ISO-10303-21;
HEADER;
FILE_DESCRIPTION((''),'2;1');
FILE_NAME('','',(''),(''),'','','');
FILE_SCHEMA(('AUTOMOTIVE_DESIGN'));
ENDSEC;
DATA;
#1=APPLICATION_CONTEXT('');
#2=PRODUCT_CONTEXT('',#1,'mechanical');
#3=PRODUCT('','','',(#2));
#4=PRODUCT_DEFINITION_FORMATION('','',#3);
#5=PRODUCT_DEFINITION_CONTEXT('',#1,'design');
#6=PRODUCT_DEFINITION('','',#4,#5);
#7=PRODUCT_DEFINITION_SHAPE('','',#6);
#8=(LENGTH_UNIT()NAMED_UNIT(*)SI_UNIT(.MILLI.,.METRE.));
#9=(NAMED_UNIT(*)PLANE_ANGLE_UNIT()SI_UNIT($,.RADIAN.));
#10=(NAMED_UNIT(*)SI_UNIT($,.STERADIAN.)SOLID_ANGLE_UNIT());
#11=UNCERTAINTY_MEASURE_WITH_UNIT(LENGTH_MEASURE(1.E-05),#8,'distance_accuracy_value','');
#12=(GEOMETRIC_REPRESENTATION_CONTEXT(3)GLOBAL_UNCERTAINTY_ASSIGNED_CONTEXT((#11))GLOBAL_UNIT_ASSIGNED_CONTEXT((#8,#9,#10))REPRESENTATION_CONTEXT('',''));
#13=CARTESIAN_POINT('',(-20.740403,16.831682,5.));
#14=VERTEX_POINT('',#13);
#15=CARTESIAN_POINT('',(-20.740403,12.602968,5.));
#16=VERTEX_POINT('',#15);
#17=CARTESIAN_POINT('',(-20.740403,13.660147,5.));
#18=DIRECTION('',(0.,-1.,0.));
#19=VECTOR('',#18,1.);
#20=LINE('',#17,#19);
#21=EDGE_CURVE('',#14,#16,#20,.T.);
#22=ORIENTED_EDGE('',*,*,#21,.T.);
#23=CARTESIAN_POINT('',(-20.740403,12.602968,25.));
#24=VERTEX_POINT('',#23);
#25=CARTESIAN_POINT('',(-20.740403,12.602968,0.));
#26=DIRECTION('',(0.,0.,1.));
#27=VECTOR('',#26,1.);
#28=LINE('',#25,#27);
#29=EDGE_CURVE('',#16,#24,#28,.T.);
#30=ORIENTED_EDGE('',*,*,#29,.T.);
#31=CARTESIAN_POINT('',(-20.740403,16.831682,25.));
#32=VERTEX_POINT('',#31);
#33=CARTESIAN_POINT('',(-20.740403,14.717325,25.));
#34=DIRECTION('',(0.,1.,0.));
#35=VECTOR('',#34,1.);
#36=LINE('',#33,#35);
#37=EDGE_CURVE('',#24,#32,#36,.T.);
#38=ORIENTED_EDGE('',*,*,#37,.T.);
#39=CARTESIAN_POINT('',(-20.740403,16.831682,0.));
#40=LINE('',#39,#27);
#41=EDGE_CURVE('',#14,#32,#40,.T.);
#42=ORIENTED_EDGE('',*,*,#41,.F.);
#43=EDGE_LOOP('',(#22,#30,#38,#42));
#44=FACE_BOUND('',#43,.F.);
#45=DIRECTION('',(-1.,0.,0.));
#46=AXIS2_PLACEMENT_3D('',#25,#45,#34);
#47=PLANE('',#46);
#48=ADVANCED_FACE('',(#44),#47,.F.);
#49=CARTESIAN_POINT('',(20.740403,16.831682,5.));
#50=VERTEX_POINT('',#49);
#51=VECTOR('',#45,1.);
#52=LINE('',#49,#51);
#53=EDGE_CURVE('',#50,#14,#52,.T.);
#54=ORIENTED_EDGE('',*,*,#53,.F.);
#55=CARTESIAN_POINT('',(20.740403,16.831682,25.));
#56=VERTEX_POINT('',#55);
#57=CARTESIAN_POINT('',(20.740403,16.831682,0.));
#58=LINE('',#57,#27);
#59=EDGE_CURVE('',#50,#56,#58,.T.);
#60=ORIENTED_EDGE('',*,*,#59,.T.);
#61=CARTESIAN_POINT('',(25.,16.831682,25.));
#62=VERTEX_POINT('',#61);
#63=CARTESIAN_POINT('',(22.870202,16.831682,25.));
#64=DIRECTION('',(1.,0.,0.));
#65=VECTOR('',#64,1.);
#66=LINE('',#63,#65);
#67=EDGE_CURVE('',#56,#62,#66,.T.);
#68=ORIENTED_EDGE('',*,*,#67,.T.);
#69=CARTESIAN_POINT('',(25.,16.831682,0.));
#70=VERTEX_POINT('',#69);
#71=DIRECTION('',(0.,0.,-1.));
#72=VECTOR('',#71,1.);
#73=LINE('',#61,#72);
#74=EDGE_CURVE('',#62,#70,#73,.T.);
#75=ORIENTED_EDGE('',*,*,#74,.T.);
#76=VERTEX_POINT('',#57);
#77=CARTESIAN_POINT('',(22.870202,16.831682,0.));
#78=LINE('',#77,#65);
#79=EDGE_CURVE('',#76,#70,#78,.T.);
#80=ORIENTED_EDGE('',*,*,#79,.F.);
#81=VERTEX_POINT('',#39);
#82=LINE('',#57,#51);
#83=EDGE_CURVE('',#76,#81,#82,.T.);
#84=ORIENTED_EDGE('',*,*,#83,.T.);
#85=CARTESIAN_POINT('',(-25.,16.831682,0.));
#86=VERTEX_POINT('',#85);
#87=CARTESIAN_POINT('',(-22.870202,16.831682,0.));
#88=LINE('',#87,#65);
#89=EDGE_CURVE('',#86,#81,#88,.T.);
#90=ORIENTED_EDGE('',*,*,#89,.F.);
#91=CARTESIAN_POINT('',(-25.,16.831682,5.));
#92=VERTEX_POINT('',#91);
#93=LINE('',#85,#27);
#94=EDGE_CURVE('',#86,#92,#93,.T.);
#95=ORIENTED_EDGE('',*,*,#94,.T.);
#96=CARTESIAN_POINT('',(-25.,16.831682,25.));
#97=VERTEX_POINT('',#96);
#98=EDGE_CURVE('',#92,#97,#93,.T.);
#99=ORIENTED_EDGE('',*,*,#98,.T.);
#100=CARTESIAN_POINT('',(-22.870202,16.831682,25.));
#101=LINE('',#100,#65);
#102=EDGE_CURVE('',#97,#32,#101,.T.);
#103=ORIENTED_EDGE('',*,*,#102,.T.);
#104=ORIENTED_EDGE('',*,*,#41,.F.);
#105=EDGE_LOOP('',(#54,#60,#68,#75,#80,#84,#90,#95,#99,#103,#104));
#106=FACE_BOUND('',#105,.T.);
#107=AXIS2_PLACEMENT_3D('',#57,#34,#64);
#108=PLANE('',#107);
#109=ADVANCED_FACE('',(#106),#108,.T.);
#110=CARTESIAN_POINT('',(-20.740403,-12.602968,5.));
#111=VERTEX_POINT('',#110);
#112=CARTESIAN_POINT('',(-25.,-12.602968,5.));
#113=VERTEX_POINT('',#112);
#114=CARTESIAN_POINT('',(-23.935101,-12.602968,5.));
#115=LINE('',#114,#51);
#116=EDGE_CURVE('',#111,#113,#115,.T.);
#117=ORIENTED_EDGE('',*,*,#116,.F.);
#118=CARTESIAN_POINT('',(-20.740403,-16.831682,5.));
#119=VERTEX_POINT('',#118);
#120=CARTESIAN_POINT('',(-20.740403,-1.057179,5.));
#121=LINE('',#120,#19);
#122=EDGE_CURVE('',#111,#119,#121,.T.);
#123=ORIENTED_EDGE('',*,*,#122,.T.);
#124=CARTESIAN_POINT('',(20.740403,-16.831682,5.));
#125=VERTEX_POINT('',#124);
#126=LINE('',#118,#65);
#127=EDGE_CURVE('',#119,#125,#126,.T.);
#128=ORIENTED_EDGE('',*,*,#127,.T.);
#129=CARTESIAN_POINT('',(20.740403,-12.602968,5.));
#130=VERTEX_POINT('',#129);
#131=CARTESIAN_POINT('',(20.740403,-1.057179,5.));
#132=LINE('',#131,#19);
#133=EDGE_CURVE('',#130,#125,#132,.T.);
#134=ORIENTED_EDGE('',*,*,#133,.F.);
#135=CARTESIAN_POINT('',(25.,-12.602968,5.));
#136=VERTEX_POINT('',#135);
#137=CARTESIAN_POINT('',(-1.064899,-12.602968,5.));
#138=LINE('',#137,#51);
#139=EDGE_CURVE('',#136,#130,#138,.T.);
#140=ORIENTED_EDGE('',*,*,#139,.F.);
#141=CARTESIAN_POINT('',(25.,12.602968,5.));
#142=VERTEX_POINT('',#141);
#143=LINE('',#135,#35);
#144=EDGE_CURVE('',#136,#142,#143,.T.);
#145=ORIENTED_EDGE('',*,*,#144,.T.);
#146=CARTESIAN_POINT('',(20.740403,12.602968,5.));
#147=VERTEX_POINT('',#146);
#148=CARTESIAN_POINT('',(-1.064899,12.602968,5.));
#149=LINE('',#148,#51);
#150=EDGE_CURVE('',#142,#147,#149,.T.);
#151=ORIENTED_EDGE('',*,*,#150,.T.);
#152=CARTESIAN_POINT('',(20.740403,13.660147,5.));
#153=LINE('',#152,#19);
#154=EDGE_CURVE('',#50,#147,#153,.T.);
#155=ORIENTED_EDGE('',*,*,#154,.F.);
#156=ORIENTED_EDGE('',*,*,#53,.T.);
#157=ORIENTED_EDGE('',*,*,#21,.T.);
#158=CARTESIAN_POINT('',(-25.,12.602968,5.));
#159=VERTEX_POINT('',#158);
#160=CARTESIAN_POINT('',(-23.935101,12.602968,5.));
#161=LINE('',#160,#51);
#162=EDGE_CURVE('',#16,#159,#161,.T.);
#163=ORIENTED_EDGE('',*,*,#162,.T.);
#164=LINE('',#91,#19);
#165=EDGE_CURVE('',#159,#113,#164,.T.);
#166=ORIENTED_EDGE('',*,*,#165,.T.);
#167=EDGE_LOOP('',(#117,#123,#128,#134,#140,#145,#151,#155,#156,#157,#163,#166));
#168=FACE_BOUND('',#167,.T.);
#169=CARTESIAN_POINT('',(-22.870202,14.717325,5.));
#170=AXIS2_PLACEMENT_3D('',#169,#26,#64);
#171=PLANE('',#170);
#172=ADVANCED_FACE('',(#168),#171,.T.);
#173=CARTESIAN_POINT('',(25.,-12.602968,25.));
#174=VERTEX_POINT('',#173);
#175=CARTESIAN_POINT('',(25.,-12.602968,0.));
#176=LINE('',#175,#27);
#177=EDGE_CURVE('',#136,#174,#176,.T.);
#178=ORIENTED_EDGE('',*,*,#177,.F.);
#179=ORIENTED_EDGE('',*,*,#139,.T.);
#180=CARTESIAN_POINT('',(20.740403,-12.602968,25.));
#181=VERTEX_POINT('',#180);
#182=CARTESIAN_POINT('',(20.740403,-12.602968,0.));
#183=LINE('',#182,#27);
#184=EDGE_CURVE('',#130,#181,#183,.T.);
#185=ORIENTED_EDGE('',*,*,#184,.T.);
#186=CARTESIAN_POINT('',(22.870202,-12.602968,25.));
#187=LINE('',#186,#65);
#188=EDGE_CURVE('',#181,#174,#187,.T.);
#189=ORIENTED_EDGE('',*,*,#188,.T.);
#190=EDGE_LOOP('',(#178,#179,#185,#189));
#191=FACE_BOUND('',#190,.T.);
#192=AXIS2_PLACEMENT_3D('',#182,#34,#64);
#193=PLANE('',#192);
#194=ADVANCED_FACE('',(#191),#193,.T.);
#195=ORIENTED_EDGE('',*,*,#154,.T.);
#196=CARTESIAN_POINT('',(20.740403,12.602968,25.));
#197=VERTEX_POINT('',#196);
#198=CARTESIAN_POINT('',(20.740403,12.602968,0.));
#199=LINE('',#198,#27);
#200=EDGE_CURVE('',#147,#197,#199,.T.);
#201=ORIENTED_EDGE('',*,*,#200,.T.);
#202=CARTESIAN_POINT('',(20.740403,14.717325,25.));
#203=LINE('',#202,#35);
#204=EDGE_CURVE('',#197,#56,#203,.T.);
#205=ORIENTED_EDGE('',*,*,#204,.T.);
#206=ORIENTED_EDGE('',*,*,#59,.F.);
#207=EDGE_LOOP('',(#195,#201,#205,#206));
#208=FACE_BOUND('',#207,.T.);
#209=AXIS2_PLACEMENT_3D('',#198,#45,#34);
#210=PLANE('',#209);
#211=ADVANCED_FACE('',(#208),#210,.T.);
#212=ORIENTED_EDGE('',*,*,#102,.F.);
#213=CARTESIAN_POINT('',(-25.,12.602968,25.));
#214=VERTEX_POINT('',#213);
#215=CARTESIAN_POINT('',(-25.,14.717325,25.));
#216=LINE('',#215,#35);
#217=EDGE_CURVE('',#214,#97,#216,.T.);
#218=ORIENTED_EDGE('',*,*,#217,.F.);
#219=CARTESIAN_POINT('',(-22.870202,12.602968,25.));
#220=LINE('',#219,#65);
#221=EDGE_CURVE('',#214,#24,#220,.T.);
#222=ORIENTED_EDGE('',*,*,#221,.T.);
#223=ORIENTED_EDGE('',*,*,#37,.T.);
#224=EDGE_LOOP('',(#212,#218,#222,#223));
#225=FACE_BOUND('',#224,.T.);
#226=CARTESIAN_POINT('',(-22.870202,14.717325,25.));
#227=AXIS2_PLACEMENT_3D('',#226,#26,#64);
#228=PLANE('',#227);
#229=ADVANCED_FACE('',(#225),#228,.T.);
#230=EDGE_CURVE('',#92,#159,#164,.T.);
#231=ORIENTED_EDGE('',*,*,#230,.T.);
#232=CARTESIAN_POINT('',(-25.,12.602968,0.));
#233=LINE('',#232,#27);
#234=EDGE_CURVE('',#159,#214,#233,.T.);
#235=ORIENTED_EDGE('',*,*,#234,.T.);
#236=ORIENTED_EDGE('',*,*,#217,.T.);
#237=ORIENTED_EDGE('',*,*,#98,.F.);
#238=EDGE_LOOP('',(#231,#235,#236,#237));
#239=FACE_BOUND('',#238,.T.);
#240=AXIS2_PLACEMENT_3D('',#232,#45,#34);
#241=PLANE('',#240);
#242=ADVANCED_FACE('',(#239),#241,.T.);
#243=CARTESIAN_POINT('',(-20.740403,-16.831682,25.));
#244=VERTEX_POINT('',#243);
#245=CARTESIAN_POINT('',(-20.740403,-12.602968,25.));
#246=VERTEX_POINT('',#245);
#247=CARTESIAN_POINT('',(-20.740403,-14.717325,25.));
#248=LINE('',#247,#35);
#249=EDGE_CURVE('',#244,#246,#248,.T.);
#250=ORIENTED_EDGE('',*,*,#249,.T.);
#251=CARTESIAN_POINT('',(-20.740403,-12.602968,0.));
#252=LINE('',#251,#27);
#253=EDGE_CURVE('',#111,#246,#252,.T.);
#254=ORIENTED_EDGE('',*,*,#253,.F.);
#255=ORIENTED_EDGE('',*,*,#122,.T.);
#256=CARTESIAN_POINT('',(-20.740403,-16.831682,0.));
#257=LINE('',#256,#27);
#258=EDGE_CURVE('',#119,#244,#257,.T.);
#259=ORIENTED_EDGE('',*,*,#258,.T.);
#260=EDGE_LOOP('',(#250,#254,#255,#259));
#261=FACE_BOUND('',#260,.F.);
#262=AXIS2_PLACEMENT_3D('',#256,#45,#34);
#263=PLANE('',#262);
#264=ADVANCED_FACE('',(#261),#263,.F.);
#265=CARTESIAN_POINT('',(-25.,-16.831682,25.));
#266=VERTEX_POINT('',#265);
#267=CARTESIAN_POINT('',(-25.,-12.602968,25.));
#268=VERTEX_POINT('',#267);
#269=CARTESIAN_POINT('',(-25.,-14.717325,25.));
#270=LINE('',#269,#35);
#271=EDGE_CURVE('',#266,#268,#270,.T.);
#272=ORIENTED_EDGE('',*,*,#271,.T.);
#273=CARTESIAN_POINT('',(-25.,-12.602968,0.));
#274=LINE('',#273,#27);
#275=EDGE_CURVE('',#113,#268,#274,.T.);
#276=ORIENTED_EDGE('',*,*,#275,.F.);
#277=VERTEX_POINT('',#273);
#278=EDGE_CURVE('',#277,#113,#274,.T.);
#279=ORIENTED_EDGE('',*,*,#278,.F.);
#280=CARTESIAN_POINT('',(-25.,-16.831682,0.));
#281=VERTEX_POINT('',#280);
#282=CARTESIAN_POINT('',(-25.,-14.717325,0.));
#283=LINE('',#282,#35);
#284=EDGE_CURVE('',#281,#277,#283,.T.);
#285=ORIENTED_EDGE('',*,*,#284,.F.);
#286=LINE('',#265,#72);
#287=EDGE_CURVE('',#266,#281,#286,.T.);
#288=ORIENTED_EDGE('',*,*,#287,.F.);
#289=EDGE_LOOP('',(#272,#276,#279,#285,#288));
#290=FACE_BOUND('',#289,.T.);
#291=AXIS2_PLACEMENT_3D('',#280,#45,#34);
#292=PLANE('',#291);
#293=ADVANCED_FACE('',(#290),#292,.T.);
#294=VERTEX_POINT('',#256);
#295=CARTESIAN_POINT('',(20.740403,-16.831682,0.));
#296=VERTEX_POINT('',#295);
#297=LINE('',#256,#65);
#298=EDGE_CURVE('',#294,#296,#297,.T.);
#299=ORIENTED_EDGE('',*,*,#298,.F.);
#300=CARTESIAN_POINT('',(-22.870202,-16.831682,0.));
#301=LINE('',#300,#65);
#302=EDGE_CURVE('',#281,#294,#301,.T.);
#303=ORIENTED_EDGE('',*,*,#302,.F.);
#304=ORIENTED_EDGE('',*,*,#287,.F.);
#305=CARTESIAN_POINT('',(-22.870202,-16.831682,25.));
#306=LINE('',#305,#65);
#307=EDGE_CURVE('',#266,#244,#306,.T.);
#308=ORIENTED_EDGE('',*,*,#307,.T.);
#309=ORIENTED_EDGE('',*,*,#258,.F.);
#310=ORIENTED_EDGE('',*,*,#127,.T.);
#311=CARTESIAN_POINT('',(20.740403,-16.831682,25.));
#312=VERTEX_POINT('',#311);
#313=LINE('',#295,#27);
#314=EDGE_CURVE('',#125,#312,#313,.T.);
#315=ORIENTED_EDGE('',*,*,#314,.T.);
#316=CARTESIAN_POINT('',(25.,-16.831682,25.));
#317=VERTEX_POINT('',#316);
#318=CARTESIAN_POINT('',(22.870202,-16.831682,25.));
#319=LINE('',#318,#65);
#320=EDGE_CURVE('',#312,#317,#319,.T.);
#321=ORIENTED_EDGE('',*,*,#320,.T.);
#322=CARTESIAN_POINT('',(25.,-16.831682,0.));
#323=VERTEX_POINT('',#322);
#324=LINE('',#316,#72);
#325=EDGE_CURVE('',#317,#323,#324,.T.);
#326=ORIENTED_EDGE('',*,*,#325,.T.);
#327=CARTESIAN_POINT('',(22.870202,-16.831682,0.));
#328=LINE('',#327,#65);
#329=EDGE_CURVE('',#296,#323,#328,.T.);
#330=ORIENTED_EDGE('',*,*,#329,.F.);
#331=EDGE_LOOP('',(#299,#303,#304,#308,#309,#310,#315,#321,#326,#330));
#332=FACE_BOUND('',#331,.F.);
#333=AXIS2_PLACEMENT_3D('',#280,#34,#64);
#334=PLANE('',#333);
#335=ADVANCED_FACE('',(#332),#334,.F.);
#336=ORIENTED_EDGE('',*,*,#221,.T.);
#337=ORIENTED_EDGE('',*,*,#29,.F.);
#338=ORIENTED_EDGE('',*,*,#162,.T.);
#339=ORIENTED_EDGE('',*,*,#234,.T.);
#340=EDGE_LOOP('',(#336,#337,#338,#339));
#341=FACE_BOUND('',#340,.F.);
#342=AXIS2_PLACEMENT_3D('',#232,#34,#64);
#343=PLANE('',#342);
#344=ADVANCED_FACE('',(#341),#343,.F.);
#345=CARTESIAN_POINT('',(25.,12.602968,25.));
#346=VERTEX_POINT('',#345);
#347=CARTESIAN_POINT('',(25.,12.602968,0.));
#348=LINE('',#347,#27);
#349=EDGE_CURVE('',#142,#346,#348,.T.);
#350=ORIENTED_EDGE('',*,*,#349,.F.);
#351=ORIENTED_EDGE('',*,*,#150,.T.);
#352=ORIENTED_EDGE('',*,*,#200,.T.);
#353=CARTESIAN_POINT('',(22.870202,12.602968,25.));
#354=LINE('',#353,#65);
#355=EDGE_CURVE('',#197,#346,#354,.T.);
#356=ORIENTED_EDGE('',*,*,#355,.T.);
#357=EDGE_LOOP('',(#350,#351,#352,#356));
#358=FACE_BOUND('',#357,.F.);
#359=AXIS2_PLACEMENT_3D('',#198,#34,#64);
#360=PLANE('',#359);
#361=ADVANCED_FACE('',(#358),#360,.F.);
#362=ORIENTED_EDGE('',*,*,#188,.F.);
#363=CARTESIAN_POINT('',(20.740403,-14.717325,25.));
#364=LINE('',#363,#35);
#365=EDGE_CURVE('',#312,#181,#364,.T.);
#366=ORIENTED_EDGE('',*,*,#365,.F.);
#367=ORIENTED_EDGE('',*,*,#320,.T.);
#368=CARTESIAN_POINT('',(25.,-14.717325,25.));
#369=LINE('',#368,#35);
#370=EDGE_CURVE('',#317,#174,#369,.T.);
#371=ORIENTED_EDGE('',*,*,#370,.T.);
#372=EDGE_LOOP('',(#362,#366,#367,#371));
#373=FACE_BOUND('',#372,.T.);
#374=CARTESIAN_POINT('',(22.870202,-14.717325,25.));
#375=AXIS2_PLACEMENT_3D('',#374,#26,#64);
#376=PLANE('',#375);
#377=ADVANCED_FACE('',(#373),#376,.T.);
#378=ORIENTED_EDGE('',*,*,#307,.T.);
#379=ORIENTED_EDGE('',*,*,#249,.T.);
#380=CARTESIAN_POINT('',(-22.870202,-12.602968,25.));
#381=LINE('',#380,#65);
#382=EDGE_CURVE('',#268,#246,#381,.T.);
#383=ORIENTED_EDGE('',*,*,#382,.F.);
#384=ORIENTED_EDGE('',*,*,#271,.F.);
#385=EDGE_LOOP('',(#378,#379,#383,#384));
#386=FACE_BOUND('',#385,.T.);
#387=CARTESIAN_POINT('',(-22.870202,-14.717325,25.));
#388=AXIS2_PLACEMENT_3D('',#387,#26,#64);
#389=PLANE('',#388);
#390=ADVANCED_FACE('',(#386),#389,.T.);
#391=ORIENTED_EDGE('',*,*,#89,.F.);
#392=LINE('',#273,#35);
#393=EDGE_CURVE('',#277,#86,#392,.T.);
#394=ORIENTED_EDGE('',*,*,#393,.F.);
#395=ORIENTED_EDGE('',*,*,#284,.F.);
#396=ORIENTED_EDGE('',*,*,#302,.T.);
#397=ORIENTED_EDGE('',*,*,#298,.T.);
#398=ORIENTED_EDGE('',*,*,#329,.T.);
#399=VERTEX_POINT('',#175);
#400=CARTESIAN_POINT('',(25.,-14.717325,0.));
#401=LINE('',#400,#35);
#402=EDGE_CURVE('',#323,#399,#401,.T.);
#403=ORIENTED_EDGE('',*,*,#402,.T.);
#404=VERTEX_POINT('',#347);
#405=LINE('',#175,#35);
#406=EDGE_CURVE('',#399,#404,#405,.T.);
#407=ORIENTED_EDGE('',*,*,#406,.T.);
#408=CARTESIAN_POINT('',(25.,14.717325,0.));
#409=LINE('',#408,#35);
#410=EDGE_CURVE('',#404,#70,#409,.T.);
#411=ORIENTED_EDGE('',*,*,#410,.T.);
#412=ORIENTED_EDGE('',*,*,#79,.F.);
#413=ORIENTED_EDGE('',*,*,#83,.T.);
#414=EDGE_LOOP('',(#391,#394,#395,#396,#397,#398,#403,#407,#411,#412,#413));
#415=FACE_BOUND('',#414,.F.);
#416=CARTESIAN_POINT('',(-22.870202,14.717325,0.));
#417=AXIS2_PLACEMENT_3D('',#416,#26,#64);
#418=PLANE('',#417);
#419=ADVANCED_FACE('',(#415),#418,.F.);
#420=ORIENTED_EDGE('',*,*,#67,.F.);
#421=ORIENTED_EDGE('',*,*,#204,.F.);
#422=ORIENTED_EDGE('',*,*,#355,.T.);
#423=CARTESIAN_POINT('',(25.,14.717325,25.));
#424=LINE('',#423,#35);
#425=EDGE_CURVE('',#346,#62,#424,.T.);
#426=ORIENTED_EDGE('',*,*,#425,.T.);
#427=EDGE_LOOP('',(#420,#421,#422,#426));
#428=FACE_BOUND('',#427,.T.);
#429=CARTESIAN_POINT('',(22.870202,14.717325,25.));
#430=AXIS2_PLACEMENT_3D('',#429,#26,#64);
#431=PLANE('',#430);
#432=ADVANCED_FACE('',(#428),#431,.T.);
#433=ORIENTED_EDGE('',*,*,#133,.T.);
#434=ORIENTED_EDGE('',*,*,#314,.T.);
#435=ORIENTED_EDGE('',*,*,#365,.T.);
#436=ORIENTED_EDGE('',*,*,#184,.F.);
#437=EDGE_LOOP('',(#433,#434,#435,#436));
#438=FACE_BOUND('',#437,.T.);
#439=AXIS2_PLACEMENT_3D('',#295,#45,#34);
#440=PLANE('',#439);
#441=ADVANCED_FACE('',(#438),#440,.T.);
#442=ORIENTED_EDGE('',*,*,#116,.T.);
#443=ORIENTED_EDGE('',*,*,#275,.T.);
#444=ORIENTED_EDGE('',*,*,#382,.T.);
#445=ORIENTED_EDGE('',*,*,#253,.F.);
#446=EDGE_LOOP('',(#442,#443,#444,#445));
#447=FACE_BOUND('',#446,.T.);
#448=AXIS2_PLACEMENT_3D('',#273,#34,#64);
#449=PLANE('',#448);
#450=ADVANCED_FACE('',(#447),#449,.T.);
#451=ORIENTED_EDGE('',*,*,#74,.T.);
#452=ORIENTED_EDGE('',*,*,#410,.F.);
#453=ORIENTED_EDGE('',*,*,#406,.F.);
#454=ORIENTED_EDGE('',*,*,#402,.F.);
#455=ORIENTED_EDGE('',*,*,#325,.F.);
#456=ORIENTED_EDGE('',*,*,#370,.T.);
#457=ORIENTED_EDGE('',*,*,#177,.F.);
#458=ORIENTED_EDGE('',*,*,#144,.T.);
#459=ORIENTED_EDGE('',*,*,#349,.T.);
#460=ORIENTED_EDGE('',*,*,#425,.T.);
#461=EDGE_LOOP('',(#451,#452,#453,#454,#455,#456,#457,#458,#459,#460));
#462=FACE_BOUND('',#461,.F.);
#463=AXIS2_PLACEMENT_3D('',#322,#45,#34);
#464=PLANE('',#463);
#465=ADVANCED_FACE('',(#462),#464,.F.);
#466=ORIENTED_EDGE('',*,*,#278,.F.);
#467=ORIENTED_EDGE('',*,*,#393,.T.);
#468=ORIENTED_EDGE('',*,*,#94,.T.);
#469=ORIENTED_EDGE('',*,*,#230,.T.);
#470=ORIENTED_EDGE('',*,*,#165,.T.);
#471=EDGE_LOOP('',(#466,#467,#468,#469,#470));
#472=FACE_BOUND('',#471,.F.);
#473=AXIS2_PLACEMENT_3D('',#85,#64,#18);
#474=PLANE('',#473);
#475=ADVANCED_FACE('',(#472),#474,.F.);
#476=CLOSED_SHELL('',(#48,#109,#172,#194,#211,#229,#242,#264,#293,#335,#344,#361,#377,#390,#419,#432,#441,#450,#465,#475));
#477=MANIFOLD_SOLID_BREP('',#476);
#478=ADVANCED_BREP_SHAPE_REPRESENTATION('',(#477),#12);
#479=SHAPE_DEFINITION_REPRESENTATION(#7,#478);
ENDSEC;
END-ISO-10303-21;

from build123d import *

# Parameters (mm, degrees)
F0_W     = 4.2595966585
F0_H     = 4.2287140257
F1_DEPTH = 5
F2_DEPTH = 25


with BuildPart() as f1:
    # F0 (on Top) → F1 (new body)
    with BuildSketch(Plane.XY):
        with Locations((-22.8702016707, 14.7173251896)):
            Rectangle(F0_W, F0_H)
        Polygon((20.7404033415, 16.8316822024), (-20.7404033415, 16.8316822024), (-20.7404033415, 12.6029681767), (-25, 12.6029681767), (-25, -12.6029681767), (-20.7404033415, -12.6029681767), (-20.7404033415, -16.8316822024), (20.7404033415, -16.8316822024), (20.7404033415, -12.6029681767), (25, -12.6029681767), (25, 12.6029681767), (20.7404033415, 12.6029681767), align=None)
        with Locations((22.8702016707, 14.7173251896)):
            Rectangle(F0_W, F0_H)
        with Locations((-22.8702016707, -14.7173251896)):
            Rectangle(F0_W, F0_H)
        with Locations((22.8702016707, -14.7173251896)):
            Rectangle(F0_W, F0_H)
    extrude(amount=F1_DEPTH)

    # F0 (on Top) → F2 (join)
    with BuildSketch(Plane.XY):
        with Locations((22.8702016707, 14.7173251896)):
            Rectangle(F0_W, F0_H)
        with Locations((22.8702016707, -14.7173251896)):
            Rectangle(F0_W, F0_H)
        with Locations((-22.8702016707, -14.7173251896)):
            Rectangle(F0_W, F0_H)
        with Locations((-22.8702016707, 14.7173251896)):
            Rectangle(F0_W, F0_H)
    extrude(amount=F2_DEPTH)


solid = f1.part
